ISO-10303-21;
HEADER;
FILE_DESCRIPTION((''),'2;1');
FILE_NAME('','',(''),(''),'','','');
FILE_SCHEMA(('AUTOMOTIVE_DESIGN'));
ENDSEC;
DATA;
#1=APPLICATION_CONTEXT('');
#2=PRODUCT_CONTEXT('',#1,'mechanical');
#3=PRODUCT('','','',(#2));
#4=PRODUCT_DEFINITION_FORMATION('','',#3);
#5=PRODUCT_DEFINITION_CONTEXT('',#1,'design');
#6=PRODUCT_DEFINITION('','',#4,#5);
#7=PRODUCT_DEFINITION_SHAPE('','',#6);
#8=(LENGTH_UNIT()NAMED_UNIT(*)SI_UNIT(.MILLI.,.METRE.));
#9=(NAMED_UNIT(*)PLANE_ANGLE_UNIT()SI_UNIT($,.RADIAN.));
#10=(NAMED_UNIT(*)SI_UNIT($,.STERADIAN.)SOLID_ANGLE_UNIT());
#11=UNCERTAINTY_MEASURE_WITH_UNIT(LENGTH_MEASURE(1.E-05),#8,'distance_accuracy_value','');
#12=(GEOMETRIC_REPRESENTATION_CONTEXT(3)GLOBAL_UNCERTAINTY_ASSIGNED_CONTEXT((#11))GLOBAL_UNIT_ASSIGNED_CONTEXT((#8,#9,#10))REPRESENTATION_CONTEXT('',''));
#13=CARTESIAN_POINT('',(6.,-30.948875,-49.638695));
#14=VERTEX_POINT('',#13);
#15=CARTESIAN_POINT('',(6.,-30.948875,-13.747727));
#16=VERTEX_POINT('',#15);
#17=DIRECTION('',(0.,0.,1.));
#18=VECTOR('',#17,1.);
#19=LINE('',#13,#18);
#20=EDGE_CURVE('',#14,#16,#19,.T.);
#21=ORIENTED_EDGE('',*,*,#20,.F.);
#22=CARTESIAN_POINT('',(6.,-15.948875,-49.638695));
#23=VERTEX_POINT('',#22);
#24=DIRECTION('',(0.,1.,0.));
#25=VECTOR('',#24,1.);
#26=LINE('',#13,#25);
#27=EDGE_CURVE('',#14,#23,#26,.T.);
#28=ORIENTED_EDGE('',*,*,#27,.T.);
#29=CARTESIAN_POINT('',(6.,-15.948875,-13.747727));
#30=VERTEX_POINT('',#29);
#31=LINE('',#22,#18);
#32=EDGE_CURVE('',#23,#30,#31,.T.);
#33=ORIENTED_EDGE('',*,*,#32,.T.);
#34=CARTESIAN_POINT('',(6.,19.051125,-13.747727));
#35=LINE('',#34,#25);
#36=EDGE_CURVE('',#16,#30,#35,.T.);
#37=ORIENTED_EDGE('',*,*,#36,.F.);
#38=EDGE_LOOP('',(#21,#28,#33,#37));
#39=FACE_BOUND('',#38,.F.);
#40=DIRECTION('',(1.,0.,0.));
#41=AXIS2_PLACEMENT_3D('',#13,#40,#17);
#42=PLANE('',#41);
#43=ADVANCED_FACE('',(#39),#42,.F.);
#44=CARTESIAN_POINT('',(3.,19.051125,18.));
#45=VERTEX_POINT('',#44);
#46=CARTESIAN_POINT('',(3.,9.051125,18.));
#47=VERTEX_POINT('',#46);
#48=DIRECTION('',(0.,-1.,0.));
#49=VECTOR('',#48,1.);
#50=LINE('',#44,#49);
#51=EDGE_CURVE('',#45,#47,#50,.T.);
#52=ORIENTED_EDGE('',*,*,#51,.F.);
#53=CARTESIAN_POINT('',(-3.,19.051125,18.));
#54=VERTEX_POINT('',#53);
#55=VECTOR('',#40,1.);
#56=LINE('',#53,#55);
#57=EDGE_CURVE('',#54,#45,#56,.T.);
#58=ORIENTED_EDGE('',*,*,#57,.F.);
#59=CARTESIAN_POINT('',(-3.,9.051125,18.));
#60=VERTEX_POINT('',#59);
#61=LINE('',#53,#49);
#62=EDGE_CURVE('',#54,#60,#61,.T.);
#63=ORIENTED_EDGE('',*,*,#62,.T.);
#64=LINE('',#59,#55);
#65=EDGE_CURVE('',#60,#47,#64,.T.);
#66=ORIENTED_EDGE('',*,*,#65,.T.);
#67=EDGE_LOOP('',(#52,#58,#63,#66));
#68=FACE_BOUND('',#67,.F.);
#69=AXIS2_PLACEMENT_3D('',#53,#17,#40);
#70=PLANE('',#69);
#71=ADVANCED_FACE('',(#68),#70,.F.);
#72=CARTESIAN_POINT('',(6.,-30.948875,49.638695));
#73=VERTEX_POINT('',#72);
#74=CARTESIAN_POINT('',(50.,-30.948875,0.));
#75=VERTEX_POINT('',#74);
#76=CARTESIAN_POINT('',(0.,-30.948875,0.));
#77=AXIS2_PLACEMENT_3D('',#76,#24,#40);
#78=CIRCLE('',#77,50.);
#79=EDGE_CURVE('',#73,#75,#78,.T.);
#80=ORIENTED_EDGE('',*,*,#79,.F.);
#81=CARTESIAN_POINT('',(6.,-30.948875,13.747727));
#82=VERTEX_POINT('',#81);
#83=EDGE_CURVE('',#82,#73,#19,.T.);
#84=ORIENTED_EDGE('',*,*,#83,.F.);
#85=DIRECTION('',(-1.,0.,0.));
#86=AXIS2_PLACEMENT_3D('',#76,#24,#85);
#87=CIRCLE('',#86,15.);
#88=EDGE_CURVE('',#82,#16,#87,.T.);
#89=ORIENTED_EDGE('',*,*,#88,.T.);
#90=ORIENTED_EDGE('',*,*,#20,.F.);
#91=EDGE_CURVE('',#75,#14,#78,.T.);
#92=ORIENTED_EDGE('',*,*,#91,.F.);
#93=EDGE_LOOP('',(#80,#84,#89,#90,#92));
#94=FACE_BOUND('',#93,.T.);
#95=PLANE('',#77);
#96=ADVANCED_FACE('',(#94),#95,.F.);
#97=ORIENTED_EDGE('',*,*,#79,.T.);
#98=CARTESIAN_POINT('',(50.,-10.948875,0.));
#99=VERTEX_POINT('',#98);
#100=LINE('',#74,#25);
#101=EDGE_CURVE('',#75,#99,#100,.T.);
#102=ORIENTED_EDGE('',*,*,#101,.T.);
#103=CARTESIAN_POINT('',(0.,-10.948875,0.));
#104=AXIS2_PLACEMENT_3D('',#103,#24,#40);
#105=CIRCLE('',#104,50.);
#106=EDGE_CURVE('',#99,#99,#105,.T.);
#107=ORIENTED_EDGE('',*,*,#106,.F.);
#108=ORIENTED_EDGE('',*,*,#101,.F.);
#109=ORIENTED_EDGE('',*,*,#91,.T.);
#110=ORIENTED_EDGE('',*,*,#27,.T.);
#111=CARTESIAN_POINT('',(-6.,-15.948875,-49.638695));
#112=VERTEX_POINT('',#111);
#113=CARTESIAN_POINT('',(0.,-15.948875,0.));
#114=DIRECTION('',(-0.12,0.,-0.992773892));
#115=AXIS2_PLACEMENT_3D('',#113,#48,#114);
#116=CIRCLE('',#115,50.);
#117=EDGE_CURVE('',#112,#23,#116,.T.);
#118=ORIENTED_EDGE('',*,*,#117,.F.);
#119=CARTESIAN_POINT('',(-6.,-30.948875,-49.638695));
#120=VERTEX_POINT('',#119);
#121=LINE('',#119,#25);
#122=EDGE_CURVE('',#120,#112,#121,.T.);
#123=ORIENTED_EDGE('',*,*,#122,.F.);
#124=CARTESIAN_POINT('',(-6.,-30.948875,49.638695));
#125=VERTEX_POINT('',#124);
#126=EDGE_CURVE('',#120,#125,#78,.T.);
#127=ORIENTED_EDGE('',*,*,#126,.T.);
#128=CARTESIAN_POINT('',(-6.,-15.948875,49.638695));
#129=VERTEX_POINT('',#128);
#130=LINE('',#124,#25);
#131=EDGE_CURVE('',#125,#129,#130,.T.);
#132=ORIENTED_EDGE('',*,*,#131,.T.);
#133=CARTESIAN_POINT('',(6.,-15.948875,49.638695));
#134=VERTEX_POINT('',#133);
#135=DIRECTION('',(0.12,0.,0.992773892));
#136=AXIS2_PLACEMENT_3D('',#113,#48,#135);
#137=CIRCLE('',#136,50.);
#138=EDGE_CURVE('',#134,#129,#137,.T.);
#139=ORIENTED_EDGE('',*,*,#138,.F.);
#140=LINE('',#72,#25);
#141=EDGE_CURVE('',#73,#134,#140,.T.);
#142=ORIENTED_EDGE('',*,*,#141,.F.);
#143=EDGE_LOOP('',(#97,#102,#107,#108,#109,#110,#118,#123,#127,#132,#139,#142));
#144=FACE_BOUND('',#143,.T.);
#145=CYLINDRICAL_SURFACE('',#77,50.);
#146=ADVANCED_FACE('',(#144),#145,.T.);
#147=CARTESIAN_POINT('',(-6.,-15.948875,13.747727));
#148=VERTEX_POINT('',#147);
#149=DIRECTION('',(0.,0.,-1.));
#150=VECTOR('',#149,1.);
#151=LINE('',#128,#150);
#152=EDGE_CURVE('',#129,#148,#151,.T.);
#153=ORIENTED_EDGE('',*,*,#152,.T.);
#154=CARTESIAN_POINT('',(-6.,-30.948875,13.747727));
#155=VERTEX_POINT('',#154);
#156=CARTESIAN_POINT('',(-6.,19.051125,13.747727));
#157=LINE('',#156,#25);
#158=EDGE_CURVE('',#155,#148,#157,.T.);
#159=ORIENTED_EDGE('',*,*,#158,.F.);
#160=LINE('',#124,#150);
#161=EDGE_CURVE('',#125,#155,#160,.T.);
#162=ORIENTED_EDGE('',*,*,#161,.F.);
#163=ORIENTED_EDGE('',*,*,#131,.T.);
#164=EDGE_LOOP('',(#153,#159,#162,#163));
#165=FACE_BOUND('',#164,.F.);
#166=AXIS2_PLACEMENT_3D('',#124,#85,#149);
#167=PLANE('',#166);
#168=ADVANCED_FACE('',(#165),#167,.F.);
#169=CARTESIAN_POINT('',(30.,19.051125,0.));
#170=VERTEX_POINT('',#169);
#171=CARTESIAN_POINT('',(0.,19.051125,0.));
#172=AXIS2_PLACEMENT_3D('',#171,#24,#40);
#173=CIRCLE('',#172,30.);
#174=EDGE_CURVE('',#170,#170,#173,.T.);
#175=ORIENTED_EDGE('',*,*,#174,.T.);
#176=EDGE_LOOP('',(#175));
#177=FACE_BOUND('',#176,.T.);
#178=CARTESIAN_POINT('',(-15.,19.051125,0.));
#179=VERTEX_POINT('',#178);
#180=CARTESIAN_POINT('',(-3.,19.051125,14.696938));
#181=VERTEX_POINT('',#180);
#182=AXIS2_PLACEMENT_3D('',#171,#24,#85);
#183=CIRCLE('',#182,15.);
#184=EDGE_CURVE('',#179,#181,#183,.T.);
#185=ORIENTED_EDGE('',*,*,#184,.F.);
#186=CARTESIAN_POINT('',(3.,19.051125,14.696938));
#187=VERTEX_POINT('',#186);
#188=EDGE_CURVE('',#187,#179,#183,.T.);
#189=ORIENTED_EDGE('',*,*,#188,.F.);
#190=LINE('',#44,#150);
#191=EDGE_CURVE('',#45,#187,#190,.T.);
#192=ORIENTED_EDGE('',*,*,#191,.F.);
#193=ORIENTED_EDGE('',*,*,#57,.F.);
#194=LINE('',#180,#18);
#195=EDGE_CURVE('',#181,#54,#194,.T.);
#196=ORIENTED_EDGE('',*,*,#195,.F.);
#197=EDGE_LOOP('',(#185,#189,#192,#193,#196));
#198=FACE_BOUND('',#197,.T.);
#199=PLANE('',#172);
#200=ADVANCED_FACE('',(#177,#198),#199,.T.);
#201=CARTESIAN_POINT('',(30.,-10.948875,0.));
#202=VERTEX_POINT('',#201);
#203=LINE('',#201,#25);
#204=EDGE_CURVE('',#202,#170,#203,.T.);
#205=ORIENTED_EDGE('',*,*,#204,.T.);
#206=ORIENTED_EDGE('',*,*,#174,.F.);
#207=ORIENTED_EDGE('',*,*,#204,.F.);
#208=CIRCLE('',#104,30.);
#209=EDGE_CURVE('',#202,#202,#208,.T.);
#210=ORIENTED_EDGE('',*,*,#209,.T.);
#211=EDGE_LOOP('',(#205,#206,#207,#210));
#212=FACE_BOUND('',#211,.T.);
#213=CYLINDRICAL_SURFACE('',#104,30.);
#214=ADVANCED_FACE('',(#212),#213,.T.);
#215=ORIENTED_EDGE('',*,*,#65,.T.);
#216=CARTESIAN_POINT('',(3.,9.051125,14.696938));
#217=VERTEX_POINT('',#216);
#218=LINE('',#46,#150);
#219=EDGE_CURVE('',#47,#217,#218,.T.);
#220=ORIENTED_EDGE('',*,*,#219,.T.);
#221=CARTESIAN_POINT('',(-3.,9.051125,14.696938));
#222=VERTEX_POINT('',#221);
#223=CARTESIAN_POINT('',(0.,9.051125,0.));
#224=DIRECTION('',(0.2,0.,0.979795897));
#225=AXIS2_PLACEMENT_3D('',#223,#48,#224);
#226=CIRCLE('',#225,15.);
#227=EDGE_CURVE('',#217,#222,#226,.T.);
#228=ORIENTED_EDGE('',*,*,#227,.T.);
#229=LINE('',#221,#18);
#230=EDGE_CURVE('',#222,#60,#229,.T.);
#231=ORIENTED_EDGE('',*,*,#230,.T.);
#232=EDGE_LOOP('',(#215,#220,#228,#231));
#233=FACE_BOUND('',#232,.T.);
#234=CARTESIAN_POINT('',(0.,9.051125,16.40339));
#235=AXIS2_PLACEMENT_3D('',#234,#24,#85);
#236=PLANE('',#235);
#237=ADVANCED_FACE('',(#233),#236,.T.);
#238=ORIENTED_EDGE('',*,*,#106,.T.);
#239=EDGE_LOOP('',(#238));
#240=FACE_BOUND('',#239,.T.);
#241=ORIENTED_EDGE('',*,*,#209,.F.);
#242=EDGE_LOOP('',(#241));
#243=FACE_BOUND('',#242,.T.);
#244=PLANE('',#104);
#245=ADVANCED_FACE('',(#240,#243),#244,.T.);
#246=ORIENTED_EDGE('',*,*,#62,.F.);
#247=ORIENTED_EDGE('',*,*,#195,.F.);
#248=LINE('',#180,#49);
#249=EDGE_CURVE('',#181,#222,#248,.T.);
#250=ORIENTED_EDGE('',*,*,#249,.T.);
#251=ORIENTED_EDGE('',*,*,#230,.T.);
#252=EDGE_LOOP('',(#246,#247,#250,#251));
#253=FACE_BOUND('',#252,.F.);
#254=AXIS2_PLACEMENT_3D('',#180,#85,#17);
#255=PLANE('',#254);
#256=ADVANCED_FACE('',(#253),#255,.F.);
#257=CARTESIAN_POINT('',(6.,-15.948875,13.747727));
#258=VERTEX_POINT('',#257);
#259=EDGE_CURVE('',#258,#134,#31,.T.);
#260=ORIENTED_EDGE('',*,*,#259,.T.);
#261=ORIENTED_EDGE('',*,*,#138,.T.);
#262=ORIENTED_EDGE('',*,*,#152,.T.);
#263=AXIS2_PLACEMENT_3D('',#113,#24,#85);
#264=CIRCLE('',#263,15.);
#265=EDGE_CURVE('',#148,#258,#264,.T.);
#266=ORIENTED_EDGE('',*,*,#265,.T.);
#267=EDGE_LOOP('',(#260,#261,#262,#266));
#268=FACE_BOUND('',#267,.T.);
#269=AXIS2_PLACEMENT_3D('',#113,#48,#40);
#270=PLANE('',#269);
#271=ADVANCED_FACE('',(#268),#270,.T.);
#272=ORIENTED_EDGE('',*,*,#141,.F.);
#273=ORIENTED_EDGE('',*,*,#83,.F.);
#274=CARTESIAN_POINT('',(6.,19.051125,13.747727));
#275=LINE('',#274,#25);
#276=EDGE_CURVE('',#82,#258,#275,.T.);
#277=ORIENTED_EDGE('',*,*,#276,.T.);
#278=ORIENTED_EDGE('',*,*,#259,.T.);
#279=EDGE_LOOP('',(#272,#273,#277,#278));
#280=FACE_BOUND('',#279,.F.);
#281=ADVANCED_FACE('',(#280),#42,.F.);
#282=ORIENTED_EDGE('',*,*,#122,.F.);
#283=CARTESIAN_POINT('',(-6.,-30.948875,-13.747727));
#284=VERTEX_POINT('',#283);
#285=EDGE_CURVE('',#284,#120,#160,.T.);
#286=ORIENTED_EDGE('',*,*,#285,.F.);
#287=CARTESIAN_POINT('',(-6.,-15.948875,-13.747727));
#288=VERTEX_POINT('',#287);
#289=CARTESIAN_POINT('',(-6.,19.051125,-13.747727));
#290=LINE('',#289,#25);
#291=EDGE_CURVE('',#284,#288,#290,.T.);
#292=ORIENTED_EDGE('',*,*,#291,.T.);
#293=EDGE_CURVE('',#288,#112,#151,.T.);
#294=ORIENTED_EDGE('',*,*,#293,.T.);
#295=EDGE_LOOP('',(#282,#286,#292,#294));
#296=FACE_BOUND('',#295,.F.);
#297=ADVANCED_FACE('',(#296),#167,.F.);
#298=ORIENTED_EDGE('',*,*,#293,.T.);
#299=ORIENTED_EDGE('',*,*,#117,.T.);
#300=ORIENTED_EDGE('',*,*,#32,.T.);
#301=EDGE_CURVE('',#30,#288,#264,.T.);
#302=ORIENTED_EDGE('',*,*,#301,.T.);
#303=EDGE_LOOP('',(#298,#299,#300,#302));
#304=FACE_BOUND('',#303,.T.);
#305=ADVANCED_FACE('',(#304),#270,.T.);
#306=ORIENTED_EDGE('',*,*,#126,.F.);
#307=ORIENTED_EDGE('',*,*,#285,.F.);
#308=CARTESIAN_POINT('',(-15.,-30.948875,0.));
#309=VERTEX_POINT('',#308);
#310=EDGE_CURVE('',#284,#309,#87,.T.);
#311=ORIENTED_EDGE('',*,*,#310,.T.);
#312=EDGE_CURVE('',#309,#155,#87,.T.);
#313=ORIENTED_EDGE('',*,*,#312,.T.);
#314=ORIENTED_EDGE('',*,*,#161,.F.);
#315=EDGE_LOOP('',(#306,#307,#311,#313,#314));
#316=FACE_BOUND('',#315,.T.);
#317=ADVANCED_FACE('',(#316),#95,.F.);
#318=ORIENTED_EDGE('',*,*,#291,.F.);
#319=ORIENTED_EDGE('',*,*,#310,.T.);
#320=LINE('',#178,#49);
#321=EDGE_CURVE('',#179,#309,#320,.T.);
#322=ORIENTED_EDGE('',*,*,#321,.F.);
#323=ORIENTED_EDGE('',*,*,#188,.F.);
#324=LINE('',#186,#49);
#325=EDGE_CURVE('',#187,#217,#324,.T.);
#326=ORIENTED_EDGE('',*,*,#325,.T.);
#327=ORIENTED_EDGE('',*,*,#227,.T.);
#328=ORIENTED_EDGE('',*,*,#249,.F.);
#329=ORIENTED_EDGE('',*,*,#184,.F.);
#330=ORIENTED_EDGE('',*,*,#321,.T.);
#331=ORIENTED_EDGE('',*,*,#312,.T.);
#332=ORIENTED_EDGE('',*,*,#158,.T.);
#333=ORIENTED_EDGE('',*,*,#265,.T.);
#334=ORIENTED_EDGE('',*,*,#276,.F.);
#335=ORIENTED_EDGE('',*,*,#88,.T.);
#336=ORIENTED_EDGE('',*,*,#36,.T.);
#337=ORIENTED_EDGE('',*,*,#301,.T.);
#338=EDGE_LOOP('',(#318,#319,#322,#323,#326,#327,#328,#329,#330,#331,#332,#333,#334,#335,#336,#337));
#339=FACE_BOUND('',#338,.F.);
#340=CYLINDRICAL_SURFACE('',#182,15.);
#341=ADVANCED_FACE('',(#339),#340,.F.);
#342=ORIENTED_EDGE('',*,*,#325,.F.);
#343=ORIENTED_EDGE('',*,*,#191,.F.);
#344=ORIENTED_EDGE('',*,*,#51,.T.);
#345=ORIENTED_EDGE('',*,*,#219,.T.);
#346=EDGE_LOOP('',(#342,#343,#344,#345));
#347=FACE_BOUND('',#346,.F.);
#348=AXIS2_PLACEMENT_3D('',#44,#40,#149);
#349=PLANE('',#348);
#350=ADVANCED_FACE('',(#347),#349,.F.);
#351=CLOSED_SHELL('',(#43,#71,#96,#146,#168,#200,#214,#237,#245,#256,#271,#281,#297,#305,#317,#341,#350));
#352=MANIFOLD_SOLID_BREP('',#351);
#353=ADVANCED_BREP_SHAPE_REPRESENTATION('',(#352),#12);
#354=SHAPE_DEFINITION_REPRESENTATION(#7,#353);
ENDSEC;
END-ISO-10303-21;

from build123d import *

# Parameters (mm, degrees)
F3_DEPTH = 15
F4_R     = 15
F5_DEPTH = 141
F7_DEPTH = 10


with BuildPart() as f1:
    # F0 (on Top) → F1 (revolve)
    with BuildSketch(Plane.XY):
        Polygon((0, 19.0511253548), (0, -30.9488746452), (50, -30.9488746452), (50, -10.9488746452), (30, -10.9488746452), (30, 19.0511253548), align=None)
    revolve(axis=Axis((0, -5.9488746452, 0), (0, 1, 0)))

    # F2 (on face) → F3 (cut)
    with BuildSketch(Plane.XZ.offset(30.9488746452)):
        with BuildLine():
            ThreePointArc((6, 49.638694584), (0, 50), (-6, 49.638694584))
            Line((-6, 49.638694584), (-6, -49.638694584))
            ThreePointArc((-6, -49.638694584), (0, -50), (6, -49.638694584))
            Line((6, -49.638694584), (6, 49.638694584))
        make_face()
    extrude(amount=-F3_DEPTH, mode=Mode.SUBTRACT)

    # F4 (on face) → F5 (cut)
    with BuildSketch(Plane(origin=(0, 19.0511253548, 0), x_dir=(-1, 0, 0), z_dir=(0, 1, 0))):
        Circle(F4_R)
    extrude(amount=-F5_DEPTH, mode=Mode.SUBTRACT)

    # F6 (on face) → F7 (cut)
    with BuildSketch(Plane(origin=(0, 19.0511253548, 0), x_dir=(-1, 0, 0), z_dir=(0, 1, 0))):
        with BuildLine():
            Line((3, 14.6969384567), (3, 18))
            Line((3, 18), (-3, 18))
            Line((-3, 18), (-3, 14.6969384567))
            ThreePointArc((-3, 14.6969384567), (0, 15), (3, 14.6969384567))
        make_face()
    extrude(amount=-F7_DEPTH, mode=Mode.SUBTRACT)


solid = f1.part
